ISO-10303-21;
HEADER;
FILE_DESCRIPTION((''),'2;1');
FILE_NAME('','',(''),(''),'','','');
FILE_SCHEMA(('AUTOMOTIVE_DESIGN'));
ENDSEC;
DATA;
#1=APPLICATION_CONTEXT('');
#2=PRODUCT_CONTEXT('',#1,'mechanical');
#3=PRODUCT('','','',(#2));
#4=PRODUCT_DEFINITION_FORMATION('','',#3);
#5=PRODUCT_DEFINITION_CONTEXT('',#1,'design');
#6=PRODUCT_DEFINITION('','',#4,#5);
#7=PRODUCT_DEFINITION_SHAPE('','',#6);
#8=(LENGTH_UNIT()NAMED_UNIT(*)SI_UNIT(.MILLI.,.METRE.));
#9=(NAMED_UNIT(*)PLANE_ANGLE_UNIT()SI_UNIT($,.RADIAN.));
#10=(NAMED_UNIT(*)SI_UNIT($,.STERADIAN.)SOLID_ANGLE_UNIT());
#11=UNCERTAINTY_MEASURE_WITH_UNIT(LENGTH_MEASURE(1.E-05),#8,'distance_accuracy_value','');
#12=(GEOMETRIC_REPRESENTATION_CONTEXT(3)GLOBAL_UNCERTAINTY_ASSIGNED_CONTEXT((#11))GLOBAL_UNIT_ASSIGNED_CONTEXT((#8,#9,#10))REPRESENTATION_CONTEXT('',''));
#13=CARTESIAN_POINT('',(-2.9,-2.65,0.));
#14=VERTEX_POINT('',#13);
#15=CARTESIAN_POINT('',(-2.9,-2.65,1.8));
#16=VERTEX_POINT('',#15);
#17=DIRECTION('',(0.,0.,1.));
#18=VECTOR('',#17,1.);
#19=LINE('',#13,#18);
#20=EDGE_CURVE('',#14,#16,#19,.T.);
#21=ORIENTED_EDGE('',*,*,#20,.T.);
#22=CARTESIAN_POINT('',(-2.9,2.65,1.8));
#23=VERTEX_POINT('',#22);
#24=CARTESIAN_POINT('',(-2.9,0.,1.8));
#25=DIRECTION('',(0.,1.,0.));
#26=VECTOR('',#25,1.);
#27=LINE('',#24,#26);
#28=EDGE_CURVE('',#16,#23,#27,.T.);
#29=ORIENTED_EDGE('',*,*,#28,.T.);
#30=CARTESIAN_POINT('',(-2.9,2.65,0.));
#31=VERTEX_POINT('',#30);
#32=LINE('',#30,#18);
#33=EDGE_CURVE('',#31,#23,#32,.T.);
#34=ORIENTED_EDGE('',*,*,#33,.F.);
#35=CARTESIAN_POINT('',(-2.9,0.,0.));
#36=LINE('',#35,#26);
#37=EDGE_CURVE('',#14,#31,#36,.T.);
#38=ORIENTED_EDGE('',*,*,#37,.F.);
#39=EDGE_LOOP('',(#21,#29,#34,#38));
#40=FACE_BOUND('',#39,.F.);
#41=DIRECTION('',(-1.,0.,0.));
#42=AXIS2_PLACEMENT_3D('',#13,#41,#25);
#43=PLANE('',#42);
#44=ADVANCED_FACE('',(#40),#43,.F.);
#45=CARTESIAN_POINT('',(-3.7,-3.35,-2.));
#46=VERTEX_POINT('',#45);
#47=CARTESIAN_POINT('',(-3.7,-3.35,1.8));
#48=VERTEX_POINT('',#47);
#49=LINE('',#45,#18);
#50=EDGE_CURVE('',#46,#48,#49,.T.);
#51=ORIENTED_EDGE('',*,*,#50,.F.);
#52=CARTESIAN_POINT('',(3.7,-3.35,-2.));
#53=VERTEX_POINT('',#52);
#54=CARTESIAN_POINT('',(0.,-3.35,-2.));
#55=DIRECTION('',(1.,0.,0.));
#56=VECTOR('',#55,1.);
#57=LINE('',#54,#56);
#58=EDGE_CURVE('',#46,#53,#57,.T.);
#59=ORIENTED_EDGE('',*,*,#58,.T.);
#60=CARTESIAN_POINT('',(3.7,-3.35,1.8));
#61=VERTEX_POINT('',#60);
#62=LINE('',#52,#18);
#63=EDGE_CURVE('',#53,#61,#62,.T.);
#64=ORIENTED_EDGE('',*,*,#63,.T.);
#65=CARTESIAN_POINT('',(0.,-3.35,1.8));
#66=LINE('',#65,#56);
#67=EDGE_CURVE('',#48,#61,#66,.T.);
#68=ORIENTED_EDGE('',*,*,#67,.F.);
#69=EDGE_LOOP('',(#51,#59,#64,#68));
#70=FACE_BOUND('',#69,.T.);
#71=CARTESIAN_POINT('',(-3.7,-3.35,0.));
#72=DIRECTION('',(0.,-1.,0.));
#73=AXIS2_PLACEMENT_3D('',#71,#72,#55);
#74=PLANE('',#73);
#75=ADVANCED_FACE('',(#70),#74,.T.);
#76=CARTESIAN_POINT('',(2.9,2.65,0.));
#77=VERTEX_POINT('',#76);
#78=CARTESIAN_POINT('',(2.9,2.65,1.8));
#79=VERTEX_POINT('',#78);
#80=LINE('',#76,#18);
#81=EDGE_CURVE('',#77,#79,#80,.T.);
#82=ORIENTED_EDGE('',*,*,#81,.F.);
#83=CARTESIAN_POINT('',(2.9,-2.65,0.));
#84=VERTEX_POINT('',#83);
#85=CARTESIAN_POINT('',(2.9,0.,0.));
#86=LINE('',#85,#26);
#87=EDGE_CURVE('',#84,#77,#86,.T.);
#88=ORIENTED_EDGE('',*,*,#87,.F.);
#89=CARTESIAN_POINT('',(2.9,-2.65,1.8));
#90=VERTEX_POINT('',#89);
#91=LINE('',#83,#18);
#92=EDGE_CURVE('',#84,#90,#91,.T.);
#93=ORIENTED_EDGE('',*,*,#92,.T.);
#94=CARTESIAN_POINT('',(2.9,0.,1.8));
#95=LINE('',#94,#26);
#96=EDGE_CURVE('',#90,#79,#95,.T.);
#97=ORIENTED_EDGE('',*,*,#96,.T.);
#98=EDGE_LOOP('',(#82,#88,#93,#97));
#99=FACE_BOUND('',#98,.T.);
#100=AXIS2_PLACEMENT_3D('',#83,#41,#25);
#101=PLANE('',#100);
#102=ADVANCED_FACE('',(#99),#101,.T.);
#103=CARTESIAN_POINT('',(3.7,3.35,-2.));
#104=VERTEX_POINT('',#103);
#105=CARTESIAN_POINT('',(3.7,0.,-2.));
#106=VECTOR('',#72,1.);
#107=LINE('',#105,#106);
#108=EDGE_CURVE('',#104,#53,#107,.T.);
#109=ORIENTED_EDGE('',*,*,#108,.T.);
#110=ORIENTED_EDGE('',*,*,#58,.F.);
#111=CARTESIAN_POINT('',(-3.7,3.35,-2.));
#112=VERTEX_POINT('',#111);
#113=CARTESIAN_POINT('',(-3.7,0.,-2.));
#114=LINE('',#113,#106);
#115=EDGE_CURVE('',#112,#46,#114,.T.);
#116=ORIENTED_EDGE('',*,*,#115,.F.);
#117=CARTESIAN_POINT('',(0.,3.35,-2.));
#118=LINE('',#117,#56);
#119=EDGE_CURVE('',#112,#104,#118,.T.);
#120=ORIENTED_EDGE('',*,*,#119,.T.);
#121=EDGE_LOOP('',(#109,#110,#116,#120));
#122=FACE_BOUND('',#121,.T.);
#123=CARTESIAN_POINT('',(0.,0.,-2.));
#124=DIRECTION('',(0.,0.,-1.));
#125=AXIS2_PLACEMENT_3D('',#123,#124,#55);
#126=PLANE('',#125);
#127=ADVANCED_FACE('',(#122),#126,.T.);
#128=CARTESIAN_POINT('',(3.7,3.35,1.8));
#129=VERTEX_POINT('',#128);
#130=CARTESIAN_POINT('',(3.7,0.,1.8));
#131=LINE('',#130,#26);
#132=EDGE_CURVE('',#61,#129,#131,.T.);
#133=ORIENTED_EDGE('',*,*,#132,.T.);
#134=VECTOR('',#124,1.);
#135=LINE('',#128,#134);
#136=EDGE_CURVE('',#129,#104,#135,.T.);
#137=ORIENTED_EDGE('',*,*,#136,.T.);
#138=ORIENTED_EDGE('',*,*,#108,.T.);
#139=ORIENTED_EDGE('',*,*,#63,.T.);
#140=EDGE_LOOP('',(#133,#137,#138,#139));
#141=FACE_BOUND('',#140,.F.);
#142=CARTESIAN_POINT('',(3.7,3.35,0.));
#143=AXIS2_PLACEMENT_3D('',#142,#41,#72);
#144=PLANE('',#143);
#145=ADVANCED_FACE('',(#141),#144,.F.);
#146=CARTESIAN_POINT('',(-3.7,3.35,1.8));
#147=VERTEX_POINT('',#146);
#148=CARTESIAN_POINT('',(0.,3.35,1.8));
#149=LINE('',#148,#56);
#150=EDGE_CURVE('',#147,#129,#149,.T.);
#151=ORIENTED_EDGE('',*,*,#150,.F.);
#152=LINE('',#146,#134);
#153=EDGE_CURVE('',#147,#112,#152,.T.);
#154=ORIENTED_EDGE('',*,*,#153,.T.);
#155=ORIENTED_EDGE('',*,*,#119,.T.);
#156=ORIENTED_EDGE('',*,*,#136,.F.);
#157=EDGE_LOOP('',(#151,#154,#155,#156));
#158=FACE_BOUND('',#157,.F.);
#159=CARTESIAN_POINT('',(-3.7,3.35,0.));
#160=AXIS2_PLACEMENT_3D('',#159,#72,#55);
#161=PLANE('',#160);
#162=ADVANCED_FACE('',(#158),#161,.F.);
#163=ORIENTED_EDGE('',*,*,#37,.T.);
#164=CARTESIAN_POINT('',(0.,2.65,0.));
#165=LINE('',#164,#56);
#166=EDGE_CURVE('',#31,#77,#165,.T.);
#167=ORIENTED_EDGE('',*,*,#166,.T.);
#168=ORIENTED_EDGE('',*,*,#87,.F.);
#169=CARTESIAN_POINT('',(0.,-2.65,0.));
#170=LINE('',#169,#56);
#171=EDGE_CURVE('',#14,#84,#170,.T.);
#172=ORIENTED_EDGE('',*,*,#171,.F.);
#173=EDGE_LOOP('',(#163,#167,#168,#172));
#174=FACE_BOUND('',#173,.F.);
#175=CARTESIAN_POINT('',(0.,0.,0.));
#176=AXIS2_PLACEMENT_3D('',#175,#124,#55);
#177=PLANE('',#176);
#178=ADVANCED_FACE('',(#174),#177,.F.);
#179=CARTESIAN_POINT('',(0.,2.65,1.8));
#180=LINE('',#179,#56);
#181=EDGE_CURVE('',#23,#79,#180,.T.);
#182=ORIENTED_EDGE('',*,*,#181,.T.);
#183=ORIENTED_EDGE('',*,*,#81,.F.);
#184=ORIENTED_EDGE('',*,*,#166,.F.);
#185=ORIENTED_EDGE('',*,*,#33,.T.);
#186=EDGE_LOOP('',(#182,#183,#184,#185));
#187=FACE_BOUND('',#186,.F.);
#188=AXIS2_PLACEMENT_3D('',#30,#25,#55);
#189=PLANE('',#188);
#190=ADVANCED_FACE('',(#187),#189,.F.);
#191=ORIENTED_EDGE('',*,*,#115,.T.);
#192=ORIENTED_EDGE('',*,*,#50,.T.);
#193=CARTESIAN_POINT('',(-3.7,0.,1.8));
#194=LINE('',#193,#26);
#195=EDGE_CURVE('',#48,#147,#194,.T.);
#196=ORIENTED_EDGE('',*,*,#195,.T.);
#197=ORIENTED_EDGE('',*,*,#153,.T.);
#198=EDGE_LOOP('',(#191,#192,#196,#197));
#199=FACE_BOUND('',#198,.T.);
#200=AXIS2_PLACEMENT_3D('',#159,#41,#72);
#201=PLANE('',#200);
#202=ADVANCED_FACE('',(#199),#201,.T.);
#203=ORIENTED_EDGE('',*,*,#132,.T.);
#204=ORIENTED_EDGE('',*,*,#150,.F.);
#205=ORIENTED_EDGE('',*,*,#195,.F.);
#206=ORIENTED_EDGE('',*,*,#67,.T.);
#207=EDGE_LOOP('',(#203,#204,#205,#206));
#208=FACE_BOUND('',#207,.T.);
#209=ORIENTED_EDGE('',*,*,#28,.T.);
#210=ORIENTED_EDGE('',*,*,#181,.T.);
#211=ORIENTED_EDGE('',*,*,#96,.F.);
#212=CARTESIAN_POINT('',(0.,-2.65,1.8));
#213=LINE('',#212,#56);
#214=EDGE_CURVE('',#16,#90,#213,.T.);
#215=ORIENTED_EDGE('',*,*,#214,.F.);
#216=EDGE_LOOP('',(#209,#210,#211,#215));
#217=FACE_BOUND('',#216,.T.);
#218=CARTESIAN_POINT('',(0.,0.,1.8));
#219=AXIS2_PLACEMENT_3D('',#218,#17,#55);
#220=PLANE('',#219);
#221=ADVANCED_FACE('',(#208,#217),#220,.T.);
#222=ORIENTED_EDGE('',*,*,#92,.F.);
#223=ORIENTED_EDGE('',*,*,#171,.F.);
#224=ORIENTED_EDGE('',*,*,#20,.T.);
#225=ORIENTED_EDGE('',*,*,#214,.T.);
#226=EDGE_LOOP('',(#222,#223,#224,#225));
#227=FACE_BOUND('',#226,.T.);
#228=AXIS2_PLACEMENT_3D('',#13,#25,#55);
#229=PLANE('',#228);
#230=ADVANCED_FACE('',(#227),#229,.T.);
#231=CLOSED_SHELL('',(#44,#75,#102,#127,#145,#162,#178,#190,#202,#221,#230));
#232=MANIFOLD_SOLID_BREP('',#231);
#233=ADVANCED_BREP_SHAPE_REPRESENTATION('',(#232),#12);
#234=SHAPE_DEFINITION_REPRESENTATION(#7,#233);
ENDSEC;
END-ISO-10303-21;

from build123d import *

# Parameters (mm, degrees)
F0_W     = 7.4
F0_H     = 6.7
F0_W_2   = 5.8
F0_H_2   = 5.3
F1_DEPTH = 1.8
F2_W     = 7.4
F2_H     = 6.7
F3_DEPTH = 2


# Not quite as in the source:
# - a feature names something its author has since deleted; it is built from what else it names


with BuildPart() as f1:
    # F0 (on Top) → F1 (new body)
    with BuildSketch(Plane.XY):
        Rectangle(F0_W, F0_H)
        Rectangle(F0_W_2, F0_H_2, mode=Mode.SUBTRACT)
    extrude(amount=F1_DEPTH)

    # F2 (on face) → F3 (join)
    with BuildSketch(Plane(origin=(0, 0, 0), x_dir=(1, 0, 0), z_dir=(0, 0, -1))):
        Rectangle(F2_W, F2_H)
    extrude(amount=F3_DEPTH)


solid = f1.part
